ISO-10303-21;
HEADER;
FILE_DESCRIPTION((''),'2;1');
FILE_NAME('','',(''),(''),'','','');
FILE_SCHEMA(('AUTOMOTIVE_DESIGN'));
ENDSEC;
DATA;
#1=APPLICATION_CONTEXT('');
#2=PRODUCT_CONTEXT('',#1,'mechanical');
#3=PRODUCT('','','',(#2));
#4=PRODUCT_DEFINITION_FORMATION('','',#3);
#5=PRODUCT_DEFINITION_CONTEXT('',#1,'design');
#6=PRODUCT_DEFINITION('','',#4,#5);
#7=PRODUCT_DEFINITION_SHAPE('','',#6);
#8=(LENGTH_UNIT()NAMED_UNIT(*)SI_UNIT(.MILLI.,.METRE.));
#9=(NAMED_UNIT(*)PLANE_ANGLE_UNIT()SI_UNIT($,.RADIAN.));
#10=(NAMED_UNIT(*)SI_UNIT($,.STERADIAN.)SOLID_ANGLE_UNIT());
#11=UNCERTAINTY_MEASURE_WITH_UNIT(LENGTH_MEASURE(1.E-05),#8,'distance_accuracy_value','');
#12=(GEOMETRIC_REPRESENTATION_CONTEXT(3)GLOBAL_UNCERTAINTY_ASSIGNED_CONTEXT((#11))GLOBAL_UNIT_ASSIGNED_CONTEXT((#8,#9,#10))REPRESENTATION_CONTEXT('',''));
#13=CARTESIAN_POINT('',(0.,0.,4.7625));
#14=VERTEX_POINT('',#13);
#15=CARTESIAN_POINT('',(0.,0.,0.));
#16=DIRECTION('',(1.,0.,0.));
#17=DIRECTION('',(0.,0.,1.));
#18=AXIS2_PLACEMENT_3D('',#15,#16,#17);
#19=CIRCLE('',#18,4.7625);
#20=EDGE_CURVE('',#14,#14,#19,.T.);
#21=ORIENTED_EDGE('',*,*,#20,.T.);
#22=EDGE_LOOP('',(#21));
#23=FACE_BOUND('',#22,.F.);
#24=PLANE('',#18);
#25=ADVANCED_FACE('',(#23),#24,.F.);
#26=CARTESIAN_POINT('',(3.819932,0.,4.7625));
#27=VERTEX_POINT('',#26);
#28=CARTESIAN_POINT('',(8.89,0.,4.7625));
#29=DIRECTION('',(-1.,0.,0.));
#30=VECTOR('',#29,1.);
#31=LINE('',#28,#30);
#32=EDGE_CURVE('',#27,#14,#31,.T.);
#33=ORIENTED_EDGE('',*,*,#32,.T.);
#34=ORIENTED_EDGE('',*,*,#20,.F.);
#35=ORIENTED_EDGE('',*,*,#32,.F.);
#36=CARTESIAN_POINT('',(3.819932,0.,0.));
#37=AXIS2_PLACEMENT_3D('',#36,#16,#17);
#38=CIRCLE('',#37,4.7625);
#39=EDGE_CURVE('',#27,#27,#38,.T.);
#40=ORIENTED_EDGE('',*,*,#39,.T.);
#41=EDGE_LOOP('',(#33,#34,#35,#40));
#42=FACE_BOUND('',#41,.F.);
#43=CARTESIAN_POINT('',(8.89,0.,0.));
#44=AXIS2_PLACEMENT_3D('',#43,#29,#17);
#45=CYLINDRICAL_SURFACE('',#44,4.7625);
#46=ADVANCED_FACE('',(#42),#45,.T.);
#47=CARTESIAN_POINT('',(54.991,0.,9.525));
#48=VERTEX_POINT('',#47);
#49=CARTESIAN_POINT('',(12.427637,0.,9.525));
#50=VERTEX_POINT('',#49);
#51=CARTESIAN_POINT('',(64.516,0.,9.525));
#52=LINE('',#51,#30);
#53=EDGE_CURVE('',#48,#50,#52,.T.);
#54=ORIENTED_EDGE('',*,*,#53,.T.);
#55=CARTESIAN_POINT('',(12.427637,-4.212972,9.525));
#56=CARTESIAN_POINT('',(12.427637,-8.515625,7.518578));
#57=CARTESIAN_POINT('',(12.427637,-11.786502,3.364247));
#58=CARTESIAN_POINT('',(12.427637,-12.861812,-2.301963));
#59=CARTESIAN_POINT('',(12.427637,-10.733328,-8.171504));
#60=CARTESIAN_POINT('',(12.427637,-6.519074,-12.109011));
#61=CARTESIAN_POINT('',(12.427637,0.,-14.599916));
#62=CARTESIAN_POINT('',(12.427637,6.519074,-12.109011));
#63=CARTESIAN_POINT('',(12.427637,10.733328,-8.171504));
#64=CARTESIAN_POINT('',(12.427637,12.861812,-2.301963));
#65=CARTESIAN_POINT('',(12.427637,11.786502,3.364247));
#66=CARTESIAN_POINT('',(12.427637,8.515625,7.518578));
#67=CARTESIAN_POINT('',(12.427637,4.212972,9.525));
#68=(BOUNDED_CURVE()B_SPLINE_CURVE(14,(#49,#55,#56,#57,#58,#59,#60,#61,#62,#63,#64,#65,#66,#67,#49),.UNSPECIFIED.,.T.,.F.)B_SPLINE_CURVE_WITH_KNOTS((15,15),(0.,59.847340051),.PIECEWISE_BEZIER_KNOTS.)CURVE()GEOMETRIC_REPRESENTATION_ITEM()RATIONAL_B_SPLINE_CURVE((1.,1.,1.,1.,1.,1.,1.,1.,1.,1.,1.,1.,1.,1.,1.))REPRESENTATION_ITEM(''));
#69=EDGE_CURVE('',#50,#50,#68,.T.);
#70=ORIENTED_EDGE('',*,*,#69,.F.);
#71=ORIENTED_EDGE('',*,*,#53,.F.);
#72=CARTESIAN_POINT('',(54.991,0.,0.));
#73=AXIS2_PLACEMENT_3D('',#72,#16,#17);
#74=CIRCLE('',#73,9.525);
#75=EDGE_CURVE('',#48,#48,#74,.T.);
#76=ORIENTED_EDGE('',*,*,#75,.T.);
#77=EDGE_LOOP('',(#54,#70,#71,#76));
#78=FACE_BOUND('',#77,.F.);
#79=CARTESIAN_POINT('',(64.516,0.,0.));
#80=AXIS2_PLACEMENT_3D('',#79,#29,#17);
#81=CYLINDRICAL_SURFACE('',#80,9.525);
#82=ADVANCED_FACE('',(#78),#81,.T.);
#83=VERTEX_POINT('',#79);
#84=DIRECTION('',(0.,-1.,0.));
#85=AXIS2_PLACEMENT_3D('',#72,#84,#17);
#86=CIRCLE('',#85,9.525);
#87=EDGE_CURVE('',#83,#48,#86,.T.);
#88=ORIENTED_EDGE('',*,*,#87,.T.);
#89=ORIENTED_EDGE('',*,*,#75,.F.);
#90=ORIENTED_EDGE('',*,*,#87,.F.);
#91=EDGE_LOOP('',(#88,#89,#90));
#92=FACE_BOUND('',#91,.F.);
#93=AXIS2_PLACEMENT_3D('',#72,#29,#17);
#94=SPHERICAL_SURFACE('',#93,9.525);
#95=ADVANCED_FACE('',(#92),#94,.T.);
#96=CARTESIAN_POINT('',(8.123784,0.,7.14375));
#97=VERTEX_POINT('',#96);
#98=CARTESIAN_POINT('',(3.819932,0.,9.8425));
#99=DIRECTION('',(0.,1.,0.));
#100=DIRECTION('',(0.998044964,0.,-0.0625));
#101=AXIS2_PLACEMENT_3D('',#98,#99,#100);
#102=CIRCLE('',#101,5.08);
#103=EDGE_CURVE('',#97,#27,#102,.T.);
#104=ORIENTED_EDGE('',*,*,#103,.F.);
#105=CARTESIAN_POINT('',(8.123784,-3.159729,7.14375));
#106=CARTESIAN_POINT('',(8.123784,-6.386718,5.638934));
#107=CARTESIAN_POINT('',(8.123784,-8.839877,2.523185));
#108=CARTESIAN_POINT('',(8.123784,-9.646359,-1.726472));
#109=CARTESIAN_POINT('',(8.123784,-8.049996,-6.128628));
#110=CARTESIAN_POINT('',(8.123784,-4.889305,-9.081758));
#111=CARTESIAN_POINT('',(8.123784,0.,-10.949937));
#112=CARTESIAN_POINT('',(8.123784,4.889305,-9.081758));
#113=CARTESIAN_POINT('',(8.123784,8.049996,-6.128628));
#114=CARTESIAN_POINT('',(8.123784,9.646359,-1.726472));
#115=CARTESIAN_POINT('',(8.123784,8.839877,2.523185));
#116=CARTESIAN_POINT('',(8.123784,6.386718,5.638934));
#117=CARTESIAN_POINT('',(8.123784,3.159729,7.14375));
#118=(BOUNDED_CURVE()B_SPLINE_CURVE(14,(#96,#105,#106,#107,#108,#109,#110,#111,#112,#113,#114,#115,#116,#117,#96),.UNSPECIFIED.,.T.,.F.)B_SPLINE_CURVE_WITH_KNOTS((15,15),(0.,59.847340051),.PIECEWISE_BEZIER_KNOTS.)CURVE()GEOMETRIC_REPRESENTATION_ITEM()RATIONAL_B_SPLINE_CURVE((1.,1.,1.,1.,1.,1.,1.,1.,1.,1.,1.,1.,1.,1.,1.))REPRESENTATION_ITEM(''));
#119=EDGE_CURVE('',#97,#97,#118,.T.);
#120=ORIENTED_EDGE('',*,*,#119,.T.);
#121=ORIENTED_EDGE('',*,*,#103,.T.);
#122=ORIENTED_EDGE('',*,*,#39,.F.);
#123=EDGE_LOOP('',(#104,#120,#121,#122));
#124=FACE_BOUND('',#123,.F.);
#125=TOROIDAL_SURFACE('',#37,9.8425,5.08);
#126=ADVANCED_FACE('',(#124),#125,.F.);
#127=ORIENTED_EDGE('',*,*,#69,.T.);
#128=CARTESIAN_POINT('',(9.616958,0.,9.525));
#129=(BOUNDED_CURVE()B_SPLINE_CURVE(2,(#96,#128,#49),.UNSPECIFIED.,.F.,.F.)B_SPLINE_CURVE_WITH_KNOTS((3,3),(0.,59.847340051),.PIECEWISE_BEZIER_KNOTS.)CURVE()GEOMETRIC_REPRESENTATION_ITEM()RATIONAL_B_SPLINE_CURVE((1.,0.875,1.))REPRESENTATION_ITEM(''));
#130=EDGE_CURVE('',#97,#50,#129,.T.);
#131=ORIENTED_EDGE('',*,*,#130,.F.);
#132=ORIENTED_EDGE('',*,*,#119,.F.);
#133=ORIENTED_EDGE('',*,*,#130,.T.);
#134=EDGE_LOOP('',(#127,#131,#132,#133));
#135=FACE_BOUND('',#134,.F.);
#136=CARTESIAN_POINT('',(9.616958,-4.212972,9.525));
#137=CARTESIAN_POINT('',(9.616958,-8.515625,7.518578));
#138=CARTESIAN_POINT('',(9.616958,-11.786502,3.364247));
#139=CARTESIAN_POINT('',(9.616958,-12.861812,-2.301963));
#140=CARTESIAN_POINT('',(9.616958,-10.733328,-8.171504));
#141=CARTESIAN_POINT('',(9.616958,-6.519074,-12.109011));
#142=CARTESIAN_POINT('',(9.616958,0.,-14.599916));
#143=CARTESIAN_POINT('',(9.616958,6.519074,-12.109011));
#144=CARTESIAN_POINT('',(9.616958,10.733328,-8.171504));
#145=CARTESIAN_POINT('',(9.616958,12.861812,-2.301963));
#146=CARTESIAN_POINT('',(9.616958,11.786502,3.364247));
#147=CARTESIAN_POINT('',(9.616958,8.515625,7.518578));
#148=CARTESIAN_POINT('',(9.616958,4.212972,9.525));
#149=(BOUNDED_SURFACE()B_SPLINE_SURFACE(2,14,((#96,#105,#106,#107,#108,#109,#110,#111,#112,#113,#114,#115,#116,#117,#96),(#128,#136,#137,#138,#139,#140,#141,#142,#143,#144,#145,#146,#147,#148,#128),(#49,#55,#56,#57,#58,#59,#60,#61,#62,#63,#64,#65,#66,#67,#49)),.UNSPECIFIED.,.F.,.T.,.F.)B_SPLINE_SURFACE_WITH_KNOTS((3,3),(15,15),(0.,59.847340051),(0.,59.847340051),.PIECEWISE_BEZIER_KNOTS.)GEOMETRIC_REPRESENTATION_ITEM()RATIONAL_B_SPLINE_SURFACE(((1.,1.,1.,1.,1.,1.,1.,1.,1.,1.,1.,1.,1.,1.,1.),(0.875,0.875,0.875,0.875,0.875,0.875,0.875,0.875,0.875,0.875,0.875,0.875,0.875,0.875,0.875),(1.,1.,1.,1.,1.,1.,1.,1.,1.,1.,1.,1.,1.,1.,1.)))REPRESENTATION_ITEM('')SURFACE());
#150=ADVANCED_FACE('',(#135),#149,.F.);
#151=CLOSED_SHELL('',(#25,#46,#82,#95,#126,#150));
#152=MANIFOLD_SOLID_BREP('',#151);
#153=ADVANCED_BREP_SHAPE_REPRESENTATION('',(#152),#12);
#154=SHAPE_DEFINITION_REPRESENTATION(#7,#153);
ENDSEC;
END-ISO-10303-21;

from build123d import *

# Parameters (mm, degrees)
F2_R = 9.525
F4_R = 5.08


# Not quite as in the source:
# - a fillet or chamfer that OpenCascade refuses, or shapes differently, is made with other operations: its cross-section is extruded or revolved along the edge and cut away or added


with BuildPart() as f1:
    # F0 (on Front) → F1 (revolve)
    with BuildSketch(Plane.XZ):
        Polygon((0, 4.7625), (0, 0), (64.516, 0), (64.516, 9.525), (8.89, 9.525), (8.89, 4.7625), align=None)
    revolve(axis=Axis((32.258, 0, 0), (1, 0, 0)))

    # F2
    f2_edges = [f1.edges().sort_by_distance(p)[0] for p in [
        (64.516, 0, -9.525),
    ]]
    fillet(f2_edges, radius=F2_R)

    # F3: fillet of radius 5.08 on 1 edges, made by hand

    # F3_s1 → F3_t2 (revolve)
    with BuildSketch(Plane.XZ):
        with BuildLine():
            ThreePointArc((8.89, 9.525), (7.2979698235, 6.1398455468), (3.8199315833, 4.7625))
            Line((3.8199315833, 4.7625), (8.89, 4.7625))
            Line((8.89, 4.7625), (8.89, 9.525))
        make_face()
    revolve(axis=Axis((8.89, 0, 0), (1, 0, 0)))

    # F4
    f4_edges = [f1.edges().sort_by_distance(p)[0] for p in [
        (8.89, 0, -9.525),
    ]]
    fillet(f4_edges, radius=F4_R)


solid = f1.part
